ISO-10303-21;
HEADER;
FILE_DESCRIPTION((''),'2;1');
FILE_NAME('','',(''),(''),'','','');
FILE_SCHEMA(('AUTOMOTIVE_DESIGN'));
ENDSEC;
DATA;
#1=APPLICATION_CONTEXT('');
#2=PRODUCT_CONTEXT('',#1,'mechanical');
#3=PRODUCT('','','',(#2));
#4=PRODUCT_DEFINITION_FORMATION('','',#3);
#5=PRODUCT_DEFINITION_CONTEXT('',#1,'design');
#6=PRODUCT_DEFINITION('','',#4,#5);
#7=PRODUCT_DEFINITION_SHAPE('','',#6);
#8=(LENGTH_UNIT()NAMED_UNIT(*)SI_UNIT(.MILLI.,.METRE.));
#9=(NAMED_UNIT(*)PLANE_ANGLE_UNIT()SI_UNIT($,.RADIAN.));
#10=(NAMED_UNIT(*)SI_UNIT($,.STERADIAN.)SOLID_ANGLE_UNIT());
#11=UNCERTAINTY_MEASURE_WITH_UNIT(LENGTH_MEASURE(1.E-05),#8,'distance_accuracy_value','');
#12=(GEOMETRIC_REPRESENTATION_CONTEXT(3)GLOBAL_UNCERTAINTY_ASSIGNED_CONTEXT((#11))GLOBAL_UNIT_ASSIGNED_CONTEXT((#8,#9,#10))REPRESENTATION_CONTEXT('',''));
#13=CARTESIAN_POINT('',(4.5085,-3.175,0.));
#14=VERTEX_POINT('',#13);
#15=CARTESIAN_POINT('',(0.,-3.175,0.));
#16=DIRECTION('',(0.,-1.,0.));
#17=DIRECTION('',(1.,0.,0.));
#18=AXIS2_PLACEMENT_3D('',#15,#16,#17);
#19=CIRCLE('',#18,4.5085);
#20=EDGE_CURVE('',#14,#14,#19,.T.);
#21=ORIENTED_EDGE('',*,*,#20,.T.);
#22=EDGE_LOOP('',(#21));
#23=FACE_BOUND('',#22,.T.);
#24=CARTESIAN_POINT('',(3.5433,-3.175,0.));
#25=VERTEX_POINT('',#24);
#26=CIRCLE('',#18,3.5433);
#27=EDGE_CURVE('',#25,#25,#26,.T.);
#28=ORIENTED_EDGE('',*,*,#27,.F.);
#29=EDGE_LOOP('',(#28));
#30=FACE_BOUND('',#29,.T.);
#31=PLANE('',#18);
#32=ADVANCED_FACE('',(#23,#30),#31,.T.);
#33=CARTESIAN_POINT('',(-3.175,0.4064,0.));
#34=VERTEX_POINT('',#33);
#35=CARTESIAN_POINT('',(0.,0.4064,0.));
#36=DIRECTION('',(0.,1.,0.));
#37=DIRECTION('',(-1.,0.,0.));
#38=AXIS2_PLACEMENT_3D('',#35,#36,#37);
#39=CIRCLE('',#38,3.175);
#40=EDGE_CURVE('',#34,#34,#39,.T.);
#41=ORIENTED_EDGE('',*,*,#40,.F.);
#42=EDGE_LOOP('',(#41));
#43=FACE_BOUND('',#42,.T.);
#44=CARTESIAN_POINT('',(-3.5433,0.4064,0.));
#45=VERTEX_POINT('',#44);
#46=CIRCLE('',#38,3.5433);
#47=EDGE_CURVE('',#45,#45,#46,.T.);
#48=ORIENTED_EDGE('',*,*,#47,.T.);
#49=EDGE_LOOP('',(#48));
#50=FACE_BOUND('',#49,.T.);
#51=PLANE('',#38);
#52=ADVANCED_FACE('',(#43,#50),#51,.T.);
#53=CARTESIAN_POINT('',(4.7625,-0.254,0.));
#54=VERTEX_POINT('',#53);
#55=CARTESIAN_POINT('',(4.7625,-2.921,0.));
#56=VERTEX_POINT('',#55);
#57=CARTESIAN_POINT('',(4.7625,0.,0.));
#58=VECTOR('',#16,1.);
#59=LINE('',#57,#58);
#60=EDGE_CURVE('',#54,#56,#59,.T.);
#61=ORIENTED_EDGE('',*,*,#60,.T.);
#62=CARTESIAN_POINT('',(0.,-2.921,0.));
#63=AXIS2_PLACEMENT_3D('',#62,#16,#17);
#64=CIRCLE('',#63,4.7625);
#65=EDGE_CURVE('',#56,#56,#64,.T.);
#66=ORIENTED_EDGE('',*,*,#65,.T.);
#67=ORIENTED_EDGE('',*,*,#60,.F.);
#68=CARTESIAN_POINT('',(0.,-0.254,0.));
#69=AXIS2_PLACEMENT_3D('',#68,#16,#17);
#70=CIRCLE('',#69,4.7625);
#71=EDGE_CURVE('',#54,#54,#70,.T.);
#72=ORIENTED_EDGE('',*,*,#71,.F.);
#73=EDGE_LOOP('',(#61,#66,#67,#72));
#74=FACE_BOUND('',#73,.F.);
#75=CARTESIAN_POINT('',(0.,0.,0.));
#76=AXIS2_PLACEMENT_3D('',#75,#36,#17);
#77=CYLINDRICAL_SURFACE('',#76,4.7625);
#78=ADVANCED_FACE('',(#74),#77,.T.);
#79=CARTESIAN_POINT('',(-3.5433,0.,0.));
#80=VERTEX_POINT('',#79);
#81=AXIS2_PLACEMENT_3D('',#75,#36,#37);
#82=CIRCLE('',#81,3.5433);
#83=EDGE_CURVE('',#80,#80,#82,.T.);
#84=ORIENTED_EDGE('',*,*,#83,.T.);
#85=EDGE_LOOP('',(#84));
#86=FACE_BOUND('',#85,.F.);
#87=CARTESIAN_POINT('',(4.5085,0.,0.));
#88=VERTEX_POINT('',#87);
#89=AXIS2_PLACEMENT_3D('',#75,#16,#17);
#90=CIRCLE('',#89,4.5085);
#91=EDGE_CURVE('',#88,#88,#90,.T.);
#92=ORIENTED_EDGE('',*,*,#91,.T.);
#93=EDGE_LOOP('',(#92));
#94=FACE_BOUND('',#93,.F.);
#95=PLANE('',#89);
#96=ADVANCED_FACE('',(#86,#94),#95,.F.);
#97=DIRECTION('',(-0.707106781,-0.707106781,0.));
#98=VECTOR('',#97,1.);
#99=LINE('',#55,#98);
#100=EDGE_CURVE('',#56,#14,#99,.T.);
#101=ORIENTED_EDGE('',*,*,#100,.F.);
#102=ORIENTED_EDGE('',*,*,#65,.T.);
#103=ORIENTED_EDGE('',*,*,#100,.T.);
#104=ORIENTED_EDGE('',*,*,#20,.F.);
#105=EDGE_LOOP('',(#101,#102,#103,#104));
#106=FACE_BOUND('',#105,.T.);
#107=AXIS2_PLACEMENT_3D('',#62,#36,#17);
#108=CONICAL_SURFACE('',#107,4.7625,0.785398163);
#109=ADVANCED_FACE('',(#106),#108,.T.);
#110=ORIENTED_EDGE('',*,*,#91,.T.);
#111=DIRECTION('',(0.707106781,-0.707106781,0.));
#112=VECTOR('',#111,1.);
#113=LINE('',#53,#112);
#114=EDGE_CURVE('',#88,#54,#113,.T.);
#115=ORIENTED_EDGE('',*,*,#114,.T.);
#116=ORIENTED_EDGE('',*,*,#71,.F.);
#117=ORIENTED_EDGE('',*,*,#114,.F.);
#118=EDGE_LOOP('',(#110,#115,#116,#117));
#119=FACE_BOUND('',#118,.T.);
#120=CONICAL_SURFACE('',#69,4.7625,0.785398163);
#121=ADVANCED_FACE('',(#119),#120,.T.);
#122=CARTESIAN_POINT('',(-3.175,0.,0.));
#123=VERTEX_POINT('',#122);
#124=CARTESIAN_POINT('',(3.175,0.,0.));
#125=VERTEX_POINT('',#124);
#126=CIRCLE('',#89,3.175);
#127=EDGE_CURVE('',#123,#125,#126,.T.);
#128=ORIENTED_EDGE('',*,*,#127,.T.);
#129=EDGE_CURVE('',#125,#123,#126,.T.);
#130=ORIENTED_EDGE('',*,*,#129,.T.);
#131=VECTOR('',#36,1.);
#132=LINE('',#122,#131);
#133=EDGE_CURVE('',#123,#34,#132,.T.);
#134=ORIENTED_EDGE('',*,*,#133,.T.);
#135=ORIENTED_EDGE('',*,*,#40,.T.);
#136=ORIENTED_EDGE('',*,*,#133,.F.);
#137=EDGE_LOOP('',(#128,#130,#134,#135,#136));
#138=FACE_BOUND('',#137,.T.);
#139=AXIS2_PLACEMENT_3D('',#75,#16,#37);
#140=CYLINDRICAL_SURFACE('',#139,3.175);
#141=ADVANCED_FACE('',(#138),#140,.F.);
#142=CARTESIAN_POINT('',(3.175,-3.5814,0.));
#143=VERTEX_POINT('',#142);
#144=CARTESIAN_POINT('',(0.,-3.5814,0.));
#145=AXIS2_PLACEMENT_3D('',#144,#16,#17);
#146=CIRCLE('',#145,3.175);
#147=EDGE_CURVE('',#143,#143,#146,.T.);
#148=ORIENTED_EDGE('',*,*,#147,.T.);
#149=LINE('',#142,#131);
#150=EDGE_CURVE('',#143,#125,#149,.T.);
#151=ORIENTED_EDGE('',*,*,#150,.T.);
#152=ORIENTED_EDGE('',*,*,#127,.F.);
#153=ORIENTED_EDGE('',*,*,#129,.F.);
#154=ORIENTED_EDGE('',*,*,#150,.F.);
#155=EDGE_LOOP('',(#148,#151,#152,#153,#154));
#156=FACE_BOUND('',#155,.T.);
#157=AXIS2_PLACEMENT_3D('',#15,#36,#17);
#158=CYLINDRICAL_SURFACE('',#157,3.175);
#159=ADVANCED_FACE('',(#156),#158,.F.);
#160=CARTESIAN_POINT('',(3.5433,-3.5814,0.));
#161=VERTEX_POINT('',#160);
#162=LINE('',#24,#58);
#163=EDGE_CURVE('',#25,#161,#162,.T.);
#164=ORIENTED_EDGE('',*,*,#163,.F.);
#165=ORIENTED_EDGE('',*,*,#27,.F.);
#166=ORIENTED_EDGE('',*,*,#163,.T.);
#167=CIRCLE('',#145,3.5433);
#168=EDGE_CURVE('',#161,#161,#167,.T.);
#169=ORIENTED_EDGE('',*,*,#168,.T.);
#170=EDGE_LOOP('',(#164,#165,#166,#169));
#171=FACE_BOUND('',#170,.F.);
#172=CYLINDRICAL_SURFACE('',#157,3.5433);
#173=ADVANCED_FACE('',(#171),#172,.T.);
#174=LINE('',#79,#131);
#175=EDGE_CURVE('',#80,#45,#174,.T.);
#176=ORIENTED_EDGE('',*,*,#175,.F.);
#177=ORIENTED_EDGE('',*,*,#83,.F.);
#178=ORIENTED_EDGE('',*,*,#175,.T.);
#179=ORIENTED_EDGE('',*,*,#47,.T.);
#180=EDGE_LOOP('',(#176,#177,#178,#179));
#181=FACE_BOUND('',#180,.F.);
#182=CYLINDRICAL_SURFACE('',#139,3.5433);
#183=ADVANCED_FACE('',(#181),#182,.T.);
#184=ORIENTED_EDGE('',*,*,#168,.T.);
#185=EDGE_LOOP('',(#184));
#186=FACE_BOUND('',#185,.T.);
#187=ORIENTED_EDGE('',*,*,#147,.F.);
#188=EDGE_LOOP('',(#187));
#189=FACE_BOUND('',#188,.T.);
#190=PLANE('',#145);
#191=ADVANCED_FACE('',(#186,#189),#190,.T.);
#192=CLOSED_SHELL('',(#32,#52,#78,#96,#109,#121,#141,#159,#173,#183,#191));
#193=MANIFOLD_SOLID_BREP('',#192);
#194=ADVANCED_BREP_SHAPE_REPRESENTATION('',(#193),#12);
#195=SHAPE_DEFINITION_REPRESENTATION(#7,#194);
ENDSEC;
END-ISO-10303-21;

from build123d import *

# Parameters (mm, degrees)
F0_R     = 4.7625
F0_R_2   = 3.175
F1_DEPTH = 3.175
F2_R     = 3.5433
F2_R_2   = 3.175
F3_DEPTH = 0.4064
F4_R     = 3.5433
F4_R_2   = 3.175
F5_DEPTH = 0.4064
F6_SIZE  = 0.254


with BuildPart() as f1:
    # F0 (on Front) → F1 (new body)
    with BuildSketch(Plane.XZ):
        Circle(F0_R)
        Circle(F0_R_2, mode=Mode.SUBTRACT)
    extrude(amount=F1_DEPTH)

    # F2 (on face) → F3 (join)
    with BuildSketch(Plane.XZ.offset(3.175)):
        Circle(F2_R)
        Circle(F2_R_2, mode=Mode.SUBTRACT)
    extrude(amount=F3_DEPTH)

    # F4 (on face) → F5 (join)
    with BuildSketch(Plane(origin=(0, 0, 0), x_dir=(-1, 0, 0), z_dir=(0, 1, 0))):
        Circle(F4_R)
        Circle(F4_R_2, mode=Mode.SUBTRACT)
    extrude(amount=F5_DEPTH)

    # F6
    f6_edges = [f1.edges().sort_by_distance(p)[0] for p in [
        (-4.7625, -3.175, 0),
        (-4.7625, 0, 0),
    ]]
    chamfer(f6_edges, length=F6_SIZE)


solid = f1.part
